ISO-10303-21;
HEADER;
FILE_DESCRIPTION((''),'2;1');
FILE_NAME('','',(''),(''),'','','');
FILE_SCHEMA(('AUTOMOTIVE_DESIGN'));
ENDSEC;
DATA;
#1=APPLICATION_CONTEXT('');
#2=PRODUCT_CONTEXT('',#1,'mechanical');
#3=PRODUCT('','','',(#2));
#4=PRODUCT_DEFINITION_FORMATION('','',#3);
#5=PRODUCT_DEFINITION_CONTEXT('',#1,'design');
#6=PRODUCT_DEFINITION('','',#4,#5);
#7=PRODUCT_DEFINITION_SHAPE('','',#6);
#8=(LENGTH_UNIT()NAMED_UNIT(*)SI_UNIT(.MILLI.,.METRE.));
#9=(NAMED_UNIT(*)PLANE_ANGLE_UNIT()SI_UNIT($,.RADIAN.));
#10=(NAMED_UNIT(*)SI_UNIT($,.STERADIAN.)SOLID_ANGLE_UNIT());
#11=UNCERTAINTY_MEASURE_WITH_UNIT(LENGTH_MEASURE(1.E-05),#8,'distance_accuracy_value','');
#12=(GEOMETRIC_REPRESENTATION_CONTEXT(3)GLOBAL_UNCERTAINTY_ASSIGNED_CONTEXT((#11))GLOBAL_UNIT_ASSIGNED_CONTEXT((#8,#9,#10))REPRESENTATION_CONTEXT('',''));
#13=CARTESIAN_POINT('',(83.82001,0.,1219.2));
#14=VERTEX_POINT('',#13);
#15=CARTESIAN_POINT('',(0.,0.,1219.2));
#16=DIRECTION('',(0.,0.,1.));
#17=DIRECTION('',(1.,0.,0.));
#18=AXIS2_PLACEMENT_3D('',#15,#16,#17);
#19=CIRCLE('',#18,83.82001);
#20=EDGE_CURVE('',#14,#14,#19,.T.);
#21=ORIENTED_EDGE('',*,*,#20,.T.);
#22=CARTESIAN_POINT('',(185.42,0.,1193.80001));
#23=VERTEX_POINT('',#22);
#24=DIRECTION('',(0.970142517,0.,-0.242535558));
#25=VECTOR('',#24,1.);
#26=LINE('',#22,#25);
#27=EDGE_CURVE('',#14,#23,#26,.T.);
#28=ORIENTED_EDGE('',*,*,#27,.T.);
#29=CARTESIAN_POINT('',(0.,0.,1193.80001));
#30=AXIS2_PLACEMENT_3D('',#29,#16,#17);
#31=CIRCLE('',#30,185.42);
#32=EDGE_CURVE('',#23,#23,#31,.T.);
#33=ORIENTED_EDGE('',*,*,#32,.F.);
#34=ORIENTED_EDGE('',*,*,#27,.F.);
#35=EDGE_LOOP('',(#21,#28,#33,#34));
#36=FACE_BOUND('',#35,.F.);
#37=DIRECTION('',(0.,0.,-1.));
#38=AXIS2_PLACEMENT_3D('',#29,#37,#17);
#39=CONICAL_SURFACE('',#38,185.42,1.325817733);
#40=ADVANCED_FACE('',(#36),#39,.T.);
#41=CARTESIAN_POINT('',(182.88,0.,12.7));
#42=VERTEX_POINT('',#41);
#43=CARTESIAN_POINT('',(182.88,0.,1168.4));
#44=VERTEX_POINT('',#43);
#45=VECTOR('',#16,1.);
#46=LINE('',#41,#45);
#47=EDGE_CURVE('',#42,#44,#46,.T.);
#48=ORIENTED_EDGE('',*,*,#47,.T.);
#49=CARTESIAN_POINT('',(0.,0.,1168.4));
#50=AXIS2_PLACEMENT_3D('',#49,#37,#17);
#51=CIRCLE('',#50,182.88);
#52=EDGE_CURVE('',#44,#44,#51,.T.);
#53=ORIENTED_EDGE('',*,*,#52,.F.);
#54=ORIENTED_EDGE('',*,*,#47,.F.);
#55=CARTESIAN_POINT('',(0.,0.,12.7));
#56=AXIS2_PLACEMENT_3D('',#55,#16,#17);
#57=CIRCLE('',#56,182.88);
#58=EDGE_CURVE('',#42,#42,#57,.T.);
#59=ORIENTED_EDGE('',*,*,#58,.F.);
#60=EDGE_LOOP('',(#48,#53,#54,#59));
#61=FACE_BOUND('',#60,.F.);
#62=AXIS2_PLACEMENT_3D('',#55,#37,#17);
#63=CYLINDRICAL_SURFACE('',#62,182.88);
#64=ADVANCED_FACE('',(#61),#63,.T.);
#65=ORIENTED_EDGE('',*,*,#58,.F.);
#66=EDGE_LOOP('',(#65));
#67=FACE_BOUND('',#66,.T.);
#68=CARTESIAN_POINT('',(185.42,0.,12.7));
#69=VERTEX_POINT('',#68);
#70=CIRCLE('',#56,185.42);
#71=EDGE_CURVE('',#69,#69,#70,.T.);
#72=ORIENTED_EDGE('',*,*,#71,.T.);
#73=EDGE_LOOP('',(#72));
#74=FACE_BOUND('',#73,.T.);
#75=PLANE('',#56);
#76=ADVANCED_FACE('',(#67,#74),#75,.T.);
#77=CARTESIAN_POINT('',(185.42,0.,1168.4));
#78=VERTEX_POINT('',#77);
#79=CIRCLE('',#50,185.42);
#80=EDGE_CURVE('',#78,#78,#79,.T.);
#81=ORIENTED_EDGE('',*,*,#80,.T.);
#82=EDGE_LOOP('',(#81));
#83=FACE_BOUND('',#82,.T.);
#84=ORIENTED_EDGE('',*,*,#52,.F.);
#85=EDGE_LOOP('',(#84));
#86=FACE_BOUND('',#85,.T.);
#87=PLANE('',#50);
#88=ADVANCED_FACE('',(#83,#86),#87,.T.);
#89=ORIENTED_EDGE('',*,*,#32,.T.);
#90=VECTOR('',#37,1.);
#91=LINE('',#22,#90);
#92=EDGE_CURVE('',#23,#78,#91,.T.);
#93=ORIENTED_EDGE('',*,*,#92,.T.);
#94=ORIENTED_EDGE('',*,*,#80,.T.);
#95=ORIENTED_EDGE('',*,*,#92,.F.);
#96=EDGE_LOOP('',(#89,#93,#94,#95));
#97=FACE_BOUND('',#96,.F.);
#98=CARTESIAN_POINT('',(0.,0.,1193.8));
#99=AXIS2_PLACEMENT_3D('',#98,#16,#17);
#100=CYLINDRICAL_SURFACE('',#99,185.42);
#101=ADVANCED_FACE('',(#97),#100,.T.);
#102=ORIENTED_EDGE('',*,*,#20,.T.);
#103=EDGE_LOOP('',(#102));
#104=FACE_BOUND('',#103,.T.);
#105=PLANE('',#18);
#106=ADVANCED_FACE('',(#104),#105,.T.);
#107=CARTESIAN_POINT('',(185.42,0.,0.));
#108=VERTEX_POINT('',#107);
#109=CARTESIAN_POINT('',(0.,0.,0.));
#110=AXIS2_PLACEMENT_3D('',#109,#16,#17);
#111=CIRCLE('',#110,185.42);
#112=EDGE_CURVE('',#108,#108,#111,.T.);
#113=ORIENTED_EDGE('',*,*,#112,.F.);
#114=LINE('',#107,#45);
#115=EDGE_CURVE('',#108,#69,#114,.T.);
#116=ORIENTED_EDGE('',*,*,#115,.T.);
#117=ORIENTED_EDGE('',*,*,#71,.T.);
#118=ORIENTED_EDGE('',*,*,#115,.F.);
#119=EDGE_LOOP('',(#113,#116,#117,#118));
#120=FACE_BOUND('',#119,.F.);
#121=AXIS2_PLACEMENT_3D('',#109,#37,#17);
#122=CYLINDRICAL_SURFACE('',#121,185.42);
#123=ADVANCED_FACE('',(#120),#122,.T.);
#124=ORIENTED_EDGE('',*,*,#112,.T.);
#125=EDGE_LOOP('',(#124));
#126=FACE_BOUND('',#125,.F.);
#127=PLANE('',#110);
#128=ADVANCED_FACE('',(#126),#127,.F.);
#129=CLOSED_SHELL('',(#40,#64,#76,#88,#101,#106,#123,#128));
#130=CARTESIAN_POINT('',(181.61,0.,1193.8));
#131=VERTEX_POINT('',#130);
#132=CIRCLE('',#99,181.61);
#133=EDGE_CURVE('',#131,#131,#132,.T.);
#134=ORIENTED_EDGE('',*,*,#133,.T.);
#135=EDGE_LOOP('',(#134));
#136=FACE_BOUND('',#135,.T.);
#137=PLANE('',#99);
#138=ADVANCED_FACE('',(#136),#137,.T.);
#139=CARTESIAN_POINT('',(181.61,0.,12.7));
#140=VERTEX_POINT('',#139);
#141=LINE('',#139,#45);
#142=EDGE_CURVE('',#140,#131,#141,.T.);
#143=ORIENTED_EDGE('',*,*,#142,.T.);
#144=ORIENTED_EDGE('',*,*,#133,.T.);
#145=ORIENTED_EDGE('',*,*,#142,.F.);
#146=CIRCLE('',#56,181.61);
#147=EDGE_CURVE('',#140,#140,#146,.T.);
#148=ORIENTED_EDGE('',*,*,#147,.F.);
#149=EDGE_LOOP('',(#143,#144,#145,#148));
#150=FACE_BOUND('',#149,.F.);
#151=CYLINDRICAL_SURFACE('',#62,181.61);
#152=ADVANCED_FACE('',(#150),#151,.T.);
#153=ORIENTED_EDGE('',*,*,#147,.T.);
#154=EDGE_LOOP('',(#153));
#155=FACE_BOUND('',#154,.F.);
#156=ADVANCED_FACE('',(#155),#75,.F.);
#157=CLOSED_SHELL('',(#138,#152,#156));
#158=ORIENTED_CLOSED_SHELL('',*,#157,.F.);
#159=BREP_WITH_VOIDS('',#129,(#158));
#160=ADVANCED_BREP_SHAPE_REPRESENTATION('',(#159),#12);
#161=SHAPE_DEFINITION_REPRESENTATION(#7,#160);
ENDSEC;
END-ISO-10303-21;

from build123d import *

# Parameters (mm, degrees)
F0_R     = 185.42
F1_DEPTH = 12.7
F2_R     = 182.88
F2_R_2   = 181.61
F3_DEPTH = 1181.1
F4_R     = 185.42
F5_DEPTH = 25.4
F6_SIZE2 = 25.39999
F6_SIZE  = 101.59999
F7_R     = 185.42
F7_R_2   = 182.88
F8_DEPTH = 25.4


# Not quite as in the source:
# - a fillet or chamfer is up to 0.001 mm smaller than in the source, because OpenCascade refuses the exact size


with BuildPart() as f1:
    # F0 (on Top) → F1 (new body)
    with BuildSketch(Plane.XY):
        Circle(F0_R)
    extrude(amount=F1_DEPTH)

    # F2 (on face) → F3 (join)
    with BuildSketch(Plane.XY.offset(12.7)):
        Circle(F2_R)
        Circle(F2_R_2, mode=Mode.SUBTRACT)
    extrude(amount=F3_DEPTH)

    # F4 (on face) → F5 (join)
    with BuildSketch(Plane.XY.offset(1193.8)):
        Circle(F4_R)
    extrude(amount=F5_DEPTH)

    # F6 (size 101.6 and 25.4 in the source; OpenCascade refuses exactly that, so slightly less here)
    f6_edges = [f1.edges().sort_by_distance(p)[0] for p in [
        (-185.42, 0, 1219.2),
    ]]
    f6_side = f1.faces().sort_by_distance((0, 0, 1219.2))[0]
    chamfer(f6_edges, length=F6_SIZE, length2=F6_SIZE2, reference=f6_side)

    # F7 (on face) → F8 (join)
    with BuildSketch(Plane(origin=(0, 0, 1193.8), x_dir=(1, 0, 0), z_dir=(0, 0, -1))):
        Circle(F7_R)
        Circle(F7_R_2, mode=Mode.SUBTRACT)
    extrude(amount=F8_DEPTH)


solid = f1.part
